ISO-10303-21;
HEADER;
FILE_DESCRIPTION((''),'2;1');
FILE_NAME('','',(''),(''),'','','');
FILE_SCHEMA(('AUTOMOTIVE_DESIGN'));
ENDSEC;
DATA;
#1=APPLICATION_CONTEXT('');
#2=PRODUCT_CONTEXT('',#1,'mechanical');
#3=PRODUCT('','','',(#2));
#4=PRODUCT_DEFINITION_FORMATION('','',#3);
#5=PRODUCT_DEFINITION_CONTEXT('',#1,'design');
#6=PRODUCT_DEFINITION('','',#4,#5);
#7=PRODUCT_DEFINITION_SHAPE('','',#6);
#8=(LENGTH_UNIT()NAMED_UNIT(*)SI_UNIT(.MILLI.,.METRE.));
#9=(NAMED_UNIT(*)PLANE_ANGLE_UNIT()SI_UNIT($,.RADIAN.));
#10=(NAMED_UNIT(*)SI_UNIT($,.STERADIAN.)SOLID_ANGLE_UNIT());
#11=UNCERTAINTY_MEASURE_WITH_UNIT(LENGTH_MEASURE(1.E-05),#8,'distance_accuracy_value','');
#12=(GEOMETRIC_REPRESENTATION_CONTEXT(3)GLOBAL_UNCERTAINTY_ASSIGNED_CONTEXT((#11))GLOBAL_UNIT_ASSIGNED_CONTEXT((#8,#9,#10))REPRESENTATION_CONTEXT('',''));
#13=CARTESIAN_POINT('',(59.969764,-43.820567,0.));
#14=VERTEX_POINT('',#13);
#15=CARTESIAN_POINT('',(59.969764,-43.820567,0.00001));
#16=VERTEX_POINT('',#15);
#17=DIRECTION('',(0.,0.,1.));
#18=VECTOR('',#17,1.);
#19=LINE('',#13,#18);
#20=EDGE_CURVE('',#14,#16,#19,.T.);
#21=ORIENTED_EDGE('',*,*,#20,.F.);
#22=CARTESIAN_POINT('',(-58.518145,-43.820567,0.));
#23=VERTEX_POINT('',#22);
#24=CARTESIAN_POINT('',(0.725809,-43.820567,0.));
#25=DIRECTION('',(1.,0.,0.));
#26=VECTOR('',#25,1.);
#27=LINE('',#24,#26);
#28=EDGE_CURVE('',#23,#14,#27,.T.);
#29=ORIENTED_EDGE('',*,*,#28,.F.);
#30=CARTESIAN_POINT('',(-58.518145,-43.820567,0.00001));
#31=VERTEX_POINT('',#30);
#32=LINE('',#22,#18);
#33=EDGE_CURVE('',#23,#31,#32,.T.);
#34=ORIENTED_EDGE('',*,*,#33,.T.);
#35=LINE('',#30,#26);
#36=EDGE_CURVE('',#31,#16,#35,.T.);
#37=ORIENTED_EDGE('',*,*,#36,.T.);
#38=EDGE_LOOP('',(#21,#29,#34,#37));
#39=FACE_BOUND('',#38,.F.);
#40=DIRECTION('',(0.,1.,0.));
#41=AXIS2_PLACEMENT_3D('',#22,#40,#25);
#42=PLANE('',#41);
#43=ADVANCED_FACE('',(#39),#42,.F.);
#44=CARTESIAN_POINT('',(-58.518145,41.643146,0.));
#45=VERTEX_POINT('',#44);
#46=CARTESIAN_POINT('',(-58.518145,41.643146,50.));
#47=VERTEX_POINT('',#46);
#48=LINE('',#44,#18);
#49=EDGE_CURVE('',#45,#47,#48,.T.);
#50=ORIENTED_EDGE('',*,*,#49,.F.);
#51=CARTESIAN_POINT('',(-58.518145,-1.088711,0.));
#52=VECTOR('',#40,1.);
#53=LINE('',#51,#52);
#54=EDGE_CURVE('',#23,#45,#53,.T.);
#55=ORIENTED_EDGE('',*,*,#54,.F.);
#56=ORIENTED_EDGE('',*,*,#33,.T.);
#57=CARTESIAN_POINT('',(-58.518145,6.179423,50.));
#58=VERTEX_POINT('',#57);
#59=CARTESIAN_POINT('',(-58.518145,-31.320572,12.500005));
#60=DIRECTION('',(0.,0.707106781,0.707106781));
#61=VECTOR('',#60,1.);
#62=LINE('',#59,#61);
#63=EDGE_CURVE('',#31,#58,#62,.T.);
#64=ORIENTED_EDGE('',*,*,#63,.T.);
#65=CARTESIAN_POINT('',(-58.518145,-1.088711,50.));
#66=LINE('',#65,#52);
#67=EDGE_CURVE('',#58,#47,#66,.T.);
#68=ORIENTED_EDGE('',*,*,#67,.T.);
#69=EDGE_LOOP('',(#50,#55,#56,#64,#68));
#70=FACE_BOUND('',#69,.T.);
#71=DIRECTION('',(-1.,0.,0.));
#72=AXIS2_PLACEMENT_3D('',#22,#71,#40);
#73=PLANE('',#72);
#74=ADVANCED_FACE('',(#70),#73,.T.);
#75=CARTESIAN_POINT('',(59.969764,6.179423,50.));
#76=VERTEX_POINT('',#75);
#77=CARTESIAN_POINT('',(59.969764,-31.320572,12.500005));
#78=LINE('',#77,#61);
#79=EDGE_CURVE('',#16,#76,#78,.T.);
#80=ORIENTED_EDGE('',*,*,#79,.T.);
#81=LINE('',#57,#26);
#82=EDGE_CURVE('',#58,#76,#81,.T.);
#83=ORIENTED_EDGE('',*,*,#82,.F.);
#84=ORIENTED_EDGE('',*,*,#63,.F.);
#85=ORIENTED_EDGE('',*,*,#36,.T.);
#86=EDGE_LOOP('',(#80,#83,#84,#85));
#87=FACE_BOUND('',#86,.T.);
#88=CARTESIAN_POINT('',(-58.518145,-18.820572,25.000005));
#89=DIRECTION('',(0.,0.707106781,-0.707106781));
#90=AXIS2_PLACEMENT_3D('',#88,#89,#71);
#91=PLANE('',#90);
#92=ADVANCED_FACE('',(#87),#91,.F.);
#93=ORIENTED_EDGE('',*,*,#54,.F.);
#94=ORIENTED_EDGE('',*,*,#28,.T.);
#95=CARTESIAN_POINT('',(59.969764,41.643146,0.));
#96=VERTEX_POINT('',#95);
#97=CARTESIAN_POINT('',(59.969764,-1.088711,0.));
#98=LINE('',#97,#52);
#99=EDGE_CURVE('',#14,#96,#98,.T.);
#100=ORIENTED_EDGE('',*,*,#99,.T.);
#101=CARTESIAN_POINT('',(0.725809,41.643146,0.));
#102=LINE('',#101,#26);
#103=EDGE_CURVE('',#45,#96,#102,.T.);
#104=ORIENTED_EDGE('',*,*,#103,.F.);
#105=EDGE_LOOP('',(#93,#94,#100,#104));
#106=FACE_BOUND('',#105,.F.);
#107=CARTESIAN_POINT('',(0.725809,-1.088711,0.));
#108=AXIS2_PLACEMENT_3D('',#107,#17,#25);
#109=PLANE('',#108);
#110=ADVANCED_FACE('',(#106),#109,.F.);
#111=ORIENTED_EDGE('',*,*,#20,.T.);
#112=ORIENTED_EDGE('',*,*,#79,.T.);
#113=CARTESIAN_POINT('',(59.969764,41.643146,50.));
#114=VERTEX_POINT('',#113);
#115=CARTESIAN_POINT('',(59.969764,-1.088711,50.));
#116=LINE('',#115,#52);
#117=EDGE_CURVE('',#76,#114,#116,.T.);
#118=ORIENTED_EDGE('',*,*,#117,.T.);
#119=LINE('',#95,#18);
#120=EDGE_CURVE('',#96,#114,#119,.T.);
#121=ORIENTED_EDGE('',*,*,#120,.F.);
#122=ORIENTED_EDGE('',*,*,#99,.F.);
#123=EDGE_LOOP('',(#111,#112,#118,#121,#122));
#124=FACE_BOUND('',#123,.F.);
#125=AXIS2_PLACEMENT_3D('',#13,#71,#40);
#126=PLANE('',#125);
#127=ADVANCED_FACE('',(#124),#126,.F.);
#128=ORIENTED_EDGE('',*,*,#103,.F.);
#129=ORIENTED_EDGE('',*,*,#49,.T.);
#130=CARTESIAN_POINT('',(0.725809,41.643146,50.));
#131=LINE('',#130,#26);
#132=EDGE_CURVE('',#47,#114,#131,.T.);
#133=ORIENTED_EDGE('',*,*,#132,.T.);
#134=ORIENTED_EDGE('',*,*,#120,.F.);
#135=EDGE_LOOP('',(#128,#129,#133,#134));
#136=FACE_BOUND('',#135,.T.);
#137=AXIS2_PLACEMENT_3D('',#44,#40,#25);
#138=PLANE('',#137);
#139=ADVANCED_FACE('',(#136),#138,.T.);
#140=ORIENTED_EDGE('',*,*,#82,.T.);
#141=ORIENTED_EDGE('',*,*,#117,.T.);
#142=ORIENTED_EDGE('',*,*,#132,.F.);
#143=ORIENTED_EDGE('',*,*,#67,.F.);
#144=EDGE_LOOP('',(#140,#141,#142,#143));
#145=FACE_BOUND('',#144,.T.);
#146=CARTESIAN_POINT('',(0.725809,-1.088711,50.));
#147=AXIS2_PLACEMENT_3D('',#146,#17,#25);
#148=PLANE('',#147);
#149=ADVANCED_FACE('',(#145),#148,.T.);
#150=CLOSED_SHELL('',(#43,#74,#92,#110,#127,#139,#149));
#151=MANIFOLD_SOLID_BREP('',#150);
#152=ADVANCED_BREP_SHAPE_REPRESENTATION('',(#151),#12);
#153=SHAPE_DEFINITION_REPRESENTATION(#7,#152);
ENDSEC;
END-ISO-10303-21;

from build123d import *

# Parameters (mm, degrees)
F0_W     = 118.4879094362
F0_H     = 85.4637138546
F1_DEPTH = 50
F2_SIZE  = 49.99999


# Not quite as in the source:
# - a fillet or chamfer is up to 0.001 mm smaller than in the source, because OpenCascade refuses the exact size


with BuildPart() as f1:
    # F0 (on Top) → F1 (new body)
    with BuildSketch(Plane.XY):
        with Locations((0.7258094847, -1.0887105018)):
            Rectangle(F0_W, F0_H)
    extrude(amount=F1_DEPTH)

    # F2 (size 50 in the source; OpenCascade refuses exactly that, so slightly less here)
    f2_edges = [f1.edges().sort_by_distance(p)[0] for p in [
        (0.725809, -43.820567, 50),
    ]]
    chamfer(f2_edges, length=F2_SIZE)


solid = f1.part
